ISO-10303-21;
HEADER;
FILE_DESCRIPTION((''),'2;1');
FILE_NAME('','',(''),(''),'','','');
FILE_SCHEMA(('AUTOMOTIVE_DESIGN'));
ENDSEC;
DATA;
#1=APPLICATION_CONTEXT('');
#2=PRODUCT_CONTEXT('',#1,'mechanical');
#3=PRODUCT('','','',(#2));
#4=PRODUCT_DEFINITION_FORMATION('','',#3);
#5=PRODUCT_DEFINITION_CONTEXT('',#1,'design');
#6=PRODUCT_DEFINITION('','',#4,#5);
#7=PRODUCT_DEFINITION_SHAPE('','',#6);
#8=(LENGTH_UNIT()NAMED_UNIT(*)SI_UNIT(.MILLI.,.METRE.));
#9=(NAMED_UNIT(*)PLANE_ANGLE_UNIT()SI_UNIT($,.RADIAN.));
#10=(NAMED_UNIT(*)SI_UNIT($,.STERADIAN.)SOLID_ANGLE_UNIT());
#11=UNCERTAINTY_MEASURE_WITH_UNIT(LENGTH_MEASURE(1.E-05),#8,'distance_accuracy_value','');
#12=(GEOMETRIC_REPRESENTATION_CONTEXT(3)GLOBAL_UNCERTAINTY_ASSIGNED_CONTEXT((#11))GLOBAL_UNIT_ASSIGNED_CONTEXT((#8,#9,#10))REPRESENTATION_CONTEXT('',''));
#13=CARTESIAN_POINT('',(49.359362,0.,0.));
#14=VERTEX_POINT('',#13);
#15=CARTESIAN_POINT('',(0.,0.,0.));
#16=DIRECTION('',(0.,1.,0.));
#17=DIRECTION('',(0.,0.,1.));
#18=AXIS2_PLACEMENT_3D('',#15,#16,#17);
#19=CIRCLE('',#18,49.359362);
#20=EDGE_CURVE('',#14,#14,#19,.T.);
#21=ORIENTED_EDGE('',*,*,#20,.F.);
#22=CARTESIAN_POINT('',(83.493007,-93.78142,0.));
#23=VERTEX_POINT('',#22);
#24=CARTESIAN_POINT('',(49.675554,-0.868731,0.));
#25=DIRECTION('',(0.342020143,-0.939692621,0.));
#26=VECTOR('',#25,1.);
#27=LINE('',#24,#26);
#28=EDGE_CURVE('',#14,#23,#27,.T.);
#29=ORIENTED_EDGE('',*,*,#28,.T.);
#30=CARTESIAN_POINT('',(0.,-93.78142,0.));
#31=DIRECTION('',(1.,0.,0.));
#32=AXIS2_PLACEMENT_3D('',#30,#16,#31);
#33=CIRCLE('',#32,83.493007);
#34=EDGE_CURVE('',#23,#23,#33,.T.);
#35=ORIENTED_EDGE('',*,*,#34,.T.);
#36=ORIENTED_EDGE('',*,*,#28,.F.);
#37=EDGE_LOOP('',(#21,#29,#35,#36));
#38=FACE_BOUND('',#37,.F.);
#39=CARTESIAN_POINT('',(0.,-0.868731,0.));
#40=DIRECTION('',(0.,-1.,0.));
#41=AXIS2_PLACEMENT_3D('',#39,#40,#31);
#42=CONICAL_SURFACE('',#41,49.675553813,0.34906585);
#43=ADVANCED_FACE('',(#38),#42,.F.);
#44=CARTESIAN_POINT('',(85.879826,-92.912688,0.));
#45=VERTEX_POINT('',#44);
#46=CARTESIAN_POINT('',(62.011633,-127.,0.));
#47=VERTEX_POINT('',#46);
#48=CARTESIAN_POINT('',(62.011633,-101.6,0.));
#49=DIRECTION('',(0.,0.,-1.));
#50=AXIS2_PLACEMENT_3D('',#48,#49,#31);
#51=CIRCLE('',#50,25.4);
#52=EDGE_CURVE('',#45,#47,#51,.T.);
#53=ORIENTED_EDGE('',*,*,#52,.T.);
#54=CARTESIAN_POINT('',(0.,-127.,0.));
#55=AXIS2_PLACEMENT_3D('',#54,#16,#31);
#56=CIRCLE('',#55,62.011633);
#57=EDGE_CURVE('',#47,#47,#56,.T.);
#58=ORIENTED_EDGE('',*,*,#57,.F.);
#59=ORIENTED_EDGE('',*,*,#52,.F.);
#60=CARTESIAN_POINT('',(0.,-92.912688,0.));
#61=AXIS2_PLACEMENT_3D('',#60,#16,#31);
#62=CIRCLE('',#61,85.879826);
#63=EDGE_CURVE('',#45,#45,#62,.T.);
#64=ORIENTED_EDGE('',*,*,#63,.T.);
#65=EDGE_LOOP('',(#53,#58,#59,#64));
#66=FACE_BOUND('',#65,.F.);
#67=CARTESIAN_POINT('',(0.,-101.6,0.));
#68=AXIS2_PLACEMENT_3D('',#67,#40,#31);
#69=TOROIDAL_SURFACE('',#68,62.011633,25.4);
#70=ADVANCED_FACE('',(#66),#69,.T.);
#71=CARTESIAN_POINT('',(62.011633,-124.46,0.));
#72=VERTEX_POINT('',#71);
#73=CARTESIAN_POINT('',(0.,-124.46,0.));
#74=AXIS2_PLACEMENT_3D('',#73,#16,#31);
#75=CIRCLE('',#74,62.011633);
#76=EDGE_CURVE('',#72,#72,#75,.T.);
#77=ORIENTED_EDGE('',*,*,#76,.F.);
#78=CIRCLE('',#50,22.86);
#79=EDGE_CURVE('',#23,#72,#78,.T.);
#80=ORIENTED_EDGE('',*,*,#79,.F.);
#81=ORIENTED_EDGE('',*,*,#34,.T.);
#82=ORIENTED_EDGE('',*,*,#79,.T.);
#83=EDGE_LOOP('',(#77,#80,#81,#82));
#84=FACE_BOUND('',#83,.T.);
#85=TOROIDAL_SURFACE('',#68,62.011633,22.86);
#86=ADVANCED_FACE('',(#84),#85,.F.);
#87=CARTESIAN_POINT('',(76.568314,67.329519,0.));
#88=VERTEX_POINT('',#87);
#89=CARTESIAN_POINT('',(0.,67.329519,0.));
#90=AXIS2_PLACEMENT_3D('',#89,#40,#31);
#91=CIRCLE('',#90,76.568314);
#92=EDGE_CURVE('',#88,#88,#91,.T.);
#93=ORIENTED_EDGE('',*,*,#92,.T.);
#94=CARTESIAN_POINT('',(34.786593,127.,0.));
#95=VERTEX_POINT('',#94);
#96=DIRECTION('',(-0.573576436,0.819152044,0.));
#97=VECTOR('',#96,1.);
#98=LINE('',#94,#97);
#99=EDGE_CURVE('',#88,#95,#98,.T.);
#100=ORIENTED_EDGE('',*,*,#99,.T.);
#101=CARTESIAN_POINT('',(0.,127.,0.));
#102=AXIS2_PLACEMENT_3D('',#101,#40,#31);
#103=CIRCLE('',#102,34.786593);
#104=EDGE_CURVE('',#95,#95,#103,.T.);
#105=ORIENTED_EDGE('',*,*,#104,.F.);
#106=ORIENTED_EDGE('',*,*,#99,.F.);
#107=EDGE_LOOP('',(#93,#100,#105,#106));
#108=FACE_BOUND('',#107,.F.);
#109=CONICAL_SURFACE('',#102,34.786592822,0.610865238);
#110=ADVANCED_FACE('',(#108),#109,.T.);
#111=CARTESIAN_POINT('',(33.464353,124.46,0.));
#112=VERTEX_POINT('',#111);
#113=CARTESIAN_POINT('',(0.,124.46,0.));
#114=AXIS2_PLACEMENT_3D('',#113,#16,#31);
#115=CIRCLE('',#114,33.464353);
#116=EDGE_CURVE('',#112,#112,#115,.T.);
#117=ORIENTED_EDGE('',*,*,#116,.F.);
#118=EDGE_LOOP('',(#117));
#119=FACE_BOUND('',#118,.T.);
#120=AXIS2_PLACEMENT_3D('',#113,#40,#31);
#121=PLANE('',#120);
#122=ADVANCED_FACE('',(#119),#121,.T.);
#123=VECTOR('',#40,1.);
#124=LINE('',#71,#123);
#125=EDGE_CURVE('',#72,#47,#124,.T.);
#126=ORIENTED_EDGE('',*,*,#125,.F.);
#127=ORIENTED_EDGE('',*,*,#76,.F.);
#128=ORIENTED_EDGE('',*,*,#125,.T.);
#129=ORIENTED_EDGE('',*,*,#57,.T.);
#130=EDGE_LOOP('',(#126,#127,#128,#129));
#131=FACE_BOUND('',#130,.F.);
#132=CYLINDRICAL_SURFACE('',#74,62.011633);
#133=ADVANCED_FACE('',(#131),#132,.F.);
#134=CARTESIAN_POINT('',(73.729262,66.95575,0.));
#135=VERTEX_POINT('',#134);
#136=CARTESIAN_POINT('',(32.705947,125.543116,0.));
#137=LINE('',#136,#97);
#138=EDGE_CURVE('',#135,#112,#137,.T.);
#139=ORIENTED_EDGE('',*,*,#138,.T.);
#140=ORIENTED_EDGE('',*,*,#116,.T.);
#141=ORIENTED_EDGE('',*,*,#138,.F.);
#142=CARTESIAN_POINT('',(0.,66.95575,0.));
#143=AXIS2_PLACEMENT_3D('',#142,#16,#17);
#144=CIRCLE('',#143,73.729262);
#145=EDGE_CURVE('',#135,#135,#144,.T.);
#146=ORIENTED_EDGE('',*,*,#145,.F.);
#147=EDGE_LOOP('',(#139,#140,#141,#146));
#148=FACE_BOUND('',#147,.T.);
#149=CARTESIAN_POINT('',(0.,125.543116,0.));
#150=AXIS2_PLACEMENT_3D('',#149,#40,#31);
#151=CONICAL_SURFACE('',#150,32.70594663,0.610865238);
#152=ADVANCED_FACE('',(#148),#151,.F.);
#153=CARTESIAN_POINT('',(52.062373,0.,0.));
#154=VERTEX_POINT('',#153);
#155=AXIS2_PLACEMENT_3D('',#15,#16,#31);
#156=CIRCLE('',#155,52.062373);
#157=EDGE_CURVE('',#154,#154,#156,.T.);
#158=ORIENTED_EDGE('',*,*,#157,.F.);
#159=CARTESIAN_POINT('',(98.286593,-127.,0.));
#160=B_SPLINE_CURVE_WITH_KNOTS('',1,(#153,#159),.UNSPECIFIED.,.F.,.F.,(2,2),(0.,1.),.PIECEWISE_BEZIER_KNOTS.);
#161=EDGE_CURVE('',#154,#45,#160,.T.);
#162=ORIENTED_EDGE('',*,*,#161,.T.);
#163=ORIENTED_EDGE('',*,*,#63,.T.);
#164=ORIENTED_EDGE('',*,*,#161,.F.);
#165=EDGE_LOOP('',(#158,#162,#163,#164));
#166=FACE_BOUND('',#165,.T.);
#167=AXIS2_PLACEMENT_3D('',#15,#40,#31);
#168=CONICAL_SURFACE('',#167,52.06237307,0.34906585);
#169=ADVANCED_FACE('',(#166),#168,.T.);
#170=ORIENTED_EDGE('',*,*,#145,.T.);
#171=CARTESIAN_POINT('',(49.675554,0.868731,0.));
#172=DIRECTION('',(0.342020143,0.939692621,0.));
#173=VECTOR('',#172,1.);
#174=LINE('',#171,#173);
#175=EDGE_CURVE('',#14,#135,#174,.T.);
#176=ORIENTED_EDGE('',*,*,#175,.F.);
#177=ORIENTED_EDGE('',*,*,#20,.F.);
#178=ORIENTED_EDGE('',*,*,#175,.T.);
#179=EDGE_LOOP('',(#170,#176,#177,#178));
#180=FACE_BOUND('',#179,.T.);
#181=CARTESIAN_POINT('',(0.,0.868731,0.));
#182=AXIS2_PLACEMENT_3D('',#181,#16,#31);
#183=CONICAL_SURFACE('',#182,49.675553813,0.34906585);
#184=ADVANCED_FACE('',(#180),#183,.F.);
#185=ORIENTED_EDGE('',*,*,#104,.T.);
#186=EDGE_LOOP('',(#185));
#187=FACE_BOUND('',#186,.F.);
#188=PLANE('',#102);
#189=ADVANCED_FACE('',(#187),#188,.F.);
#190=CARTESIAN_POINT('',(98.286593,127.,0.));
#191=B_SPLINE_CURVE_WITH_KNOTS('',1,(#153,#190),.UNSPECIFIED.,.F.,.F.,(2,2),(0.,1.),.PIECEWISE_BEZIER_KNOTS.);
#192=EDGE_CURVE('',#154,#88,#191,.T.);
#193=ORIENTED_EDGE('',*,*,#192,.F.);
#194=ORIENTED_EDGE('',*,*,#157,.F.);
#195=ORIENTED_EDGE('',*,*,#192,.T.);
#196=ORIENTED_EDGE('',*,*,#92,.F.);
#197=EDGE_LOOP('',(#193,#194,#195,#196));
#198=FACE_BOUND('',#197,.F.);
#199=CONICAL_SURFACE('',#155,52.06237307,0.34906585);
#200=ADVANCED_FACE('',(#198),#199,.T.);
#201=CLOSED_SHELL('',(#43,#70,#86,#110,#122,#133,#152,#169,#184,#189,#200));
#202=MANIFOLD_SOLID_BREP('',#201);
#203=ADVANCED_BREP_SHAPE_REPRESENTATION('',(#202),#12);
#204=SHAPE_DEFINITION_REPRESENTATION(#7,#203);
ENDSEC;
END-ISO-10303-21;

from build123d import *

# Parameters (mm, degrees)
F0_R     = 52.0623730702
F1_DEPTH = 127
F1_TAPER = -20
F2_R     = 25.4
F3_SIZE  = 63.5
F4_T     = -2.54


# Not quite as in the source:
# - a shell that OpenCascade refuses in one call is made with other operations: the cavity is built on its own and cut out


with BuildPart() as f1:
    # F0 (on Front) → F1 (new body, symmetric)
    with BuildSketch(Plane.XZ):
        Circle(F0_R)
    extrude(amount=F1_DEPTH, both=True, taper=F1_TAPER)

    # F2
    f2_edges = [f1.edges().sort_by_distance(p)[0] for p in [
        (-98.286593, -127, 0),
    ]]
    fillet(f2_edges, radius=F2_R)

    # F3
    f3_edges = [f1.edges().sort_by_distance(p)[0] for p in [
        (-98.286593, 127, 0),
    ]]
    chamfer(f3_edges, length=F3_SIZE)

    # F4: a shell. OpenCascade refuses it in one call, so the cavity is built on its own and cut out:
    # the body offset inwards by the wall thickness, plus a prism from it out through each open face.
    f4_core = offset(f1.part, amount=F4_T, kind=Kind.INTERSECTION, mode=Mode.PRIVATE)
    f4_exits = [f4_core.faces().sort_by_distance(p)[0] for p in [
        (0, -124.46, 0),
    ]]
    add(f4_core, mode=Mode.SUBTRACT)
    extrude(f4_exits, amount=-F4_T, mode=Mode.SUBTRACT)


solid = f1.part
